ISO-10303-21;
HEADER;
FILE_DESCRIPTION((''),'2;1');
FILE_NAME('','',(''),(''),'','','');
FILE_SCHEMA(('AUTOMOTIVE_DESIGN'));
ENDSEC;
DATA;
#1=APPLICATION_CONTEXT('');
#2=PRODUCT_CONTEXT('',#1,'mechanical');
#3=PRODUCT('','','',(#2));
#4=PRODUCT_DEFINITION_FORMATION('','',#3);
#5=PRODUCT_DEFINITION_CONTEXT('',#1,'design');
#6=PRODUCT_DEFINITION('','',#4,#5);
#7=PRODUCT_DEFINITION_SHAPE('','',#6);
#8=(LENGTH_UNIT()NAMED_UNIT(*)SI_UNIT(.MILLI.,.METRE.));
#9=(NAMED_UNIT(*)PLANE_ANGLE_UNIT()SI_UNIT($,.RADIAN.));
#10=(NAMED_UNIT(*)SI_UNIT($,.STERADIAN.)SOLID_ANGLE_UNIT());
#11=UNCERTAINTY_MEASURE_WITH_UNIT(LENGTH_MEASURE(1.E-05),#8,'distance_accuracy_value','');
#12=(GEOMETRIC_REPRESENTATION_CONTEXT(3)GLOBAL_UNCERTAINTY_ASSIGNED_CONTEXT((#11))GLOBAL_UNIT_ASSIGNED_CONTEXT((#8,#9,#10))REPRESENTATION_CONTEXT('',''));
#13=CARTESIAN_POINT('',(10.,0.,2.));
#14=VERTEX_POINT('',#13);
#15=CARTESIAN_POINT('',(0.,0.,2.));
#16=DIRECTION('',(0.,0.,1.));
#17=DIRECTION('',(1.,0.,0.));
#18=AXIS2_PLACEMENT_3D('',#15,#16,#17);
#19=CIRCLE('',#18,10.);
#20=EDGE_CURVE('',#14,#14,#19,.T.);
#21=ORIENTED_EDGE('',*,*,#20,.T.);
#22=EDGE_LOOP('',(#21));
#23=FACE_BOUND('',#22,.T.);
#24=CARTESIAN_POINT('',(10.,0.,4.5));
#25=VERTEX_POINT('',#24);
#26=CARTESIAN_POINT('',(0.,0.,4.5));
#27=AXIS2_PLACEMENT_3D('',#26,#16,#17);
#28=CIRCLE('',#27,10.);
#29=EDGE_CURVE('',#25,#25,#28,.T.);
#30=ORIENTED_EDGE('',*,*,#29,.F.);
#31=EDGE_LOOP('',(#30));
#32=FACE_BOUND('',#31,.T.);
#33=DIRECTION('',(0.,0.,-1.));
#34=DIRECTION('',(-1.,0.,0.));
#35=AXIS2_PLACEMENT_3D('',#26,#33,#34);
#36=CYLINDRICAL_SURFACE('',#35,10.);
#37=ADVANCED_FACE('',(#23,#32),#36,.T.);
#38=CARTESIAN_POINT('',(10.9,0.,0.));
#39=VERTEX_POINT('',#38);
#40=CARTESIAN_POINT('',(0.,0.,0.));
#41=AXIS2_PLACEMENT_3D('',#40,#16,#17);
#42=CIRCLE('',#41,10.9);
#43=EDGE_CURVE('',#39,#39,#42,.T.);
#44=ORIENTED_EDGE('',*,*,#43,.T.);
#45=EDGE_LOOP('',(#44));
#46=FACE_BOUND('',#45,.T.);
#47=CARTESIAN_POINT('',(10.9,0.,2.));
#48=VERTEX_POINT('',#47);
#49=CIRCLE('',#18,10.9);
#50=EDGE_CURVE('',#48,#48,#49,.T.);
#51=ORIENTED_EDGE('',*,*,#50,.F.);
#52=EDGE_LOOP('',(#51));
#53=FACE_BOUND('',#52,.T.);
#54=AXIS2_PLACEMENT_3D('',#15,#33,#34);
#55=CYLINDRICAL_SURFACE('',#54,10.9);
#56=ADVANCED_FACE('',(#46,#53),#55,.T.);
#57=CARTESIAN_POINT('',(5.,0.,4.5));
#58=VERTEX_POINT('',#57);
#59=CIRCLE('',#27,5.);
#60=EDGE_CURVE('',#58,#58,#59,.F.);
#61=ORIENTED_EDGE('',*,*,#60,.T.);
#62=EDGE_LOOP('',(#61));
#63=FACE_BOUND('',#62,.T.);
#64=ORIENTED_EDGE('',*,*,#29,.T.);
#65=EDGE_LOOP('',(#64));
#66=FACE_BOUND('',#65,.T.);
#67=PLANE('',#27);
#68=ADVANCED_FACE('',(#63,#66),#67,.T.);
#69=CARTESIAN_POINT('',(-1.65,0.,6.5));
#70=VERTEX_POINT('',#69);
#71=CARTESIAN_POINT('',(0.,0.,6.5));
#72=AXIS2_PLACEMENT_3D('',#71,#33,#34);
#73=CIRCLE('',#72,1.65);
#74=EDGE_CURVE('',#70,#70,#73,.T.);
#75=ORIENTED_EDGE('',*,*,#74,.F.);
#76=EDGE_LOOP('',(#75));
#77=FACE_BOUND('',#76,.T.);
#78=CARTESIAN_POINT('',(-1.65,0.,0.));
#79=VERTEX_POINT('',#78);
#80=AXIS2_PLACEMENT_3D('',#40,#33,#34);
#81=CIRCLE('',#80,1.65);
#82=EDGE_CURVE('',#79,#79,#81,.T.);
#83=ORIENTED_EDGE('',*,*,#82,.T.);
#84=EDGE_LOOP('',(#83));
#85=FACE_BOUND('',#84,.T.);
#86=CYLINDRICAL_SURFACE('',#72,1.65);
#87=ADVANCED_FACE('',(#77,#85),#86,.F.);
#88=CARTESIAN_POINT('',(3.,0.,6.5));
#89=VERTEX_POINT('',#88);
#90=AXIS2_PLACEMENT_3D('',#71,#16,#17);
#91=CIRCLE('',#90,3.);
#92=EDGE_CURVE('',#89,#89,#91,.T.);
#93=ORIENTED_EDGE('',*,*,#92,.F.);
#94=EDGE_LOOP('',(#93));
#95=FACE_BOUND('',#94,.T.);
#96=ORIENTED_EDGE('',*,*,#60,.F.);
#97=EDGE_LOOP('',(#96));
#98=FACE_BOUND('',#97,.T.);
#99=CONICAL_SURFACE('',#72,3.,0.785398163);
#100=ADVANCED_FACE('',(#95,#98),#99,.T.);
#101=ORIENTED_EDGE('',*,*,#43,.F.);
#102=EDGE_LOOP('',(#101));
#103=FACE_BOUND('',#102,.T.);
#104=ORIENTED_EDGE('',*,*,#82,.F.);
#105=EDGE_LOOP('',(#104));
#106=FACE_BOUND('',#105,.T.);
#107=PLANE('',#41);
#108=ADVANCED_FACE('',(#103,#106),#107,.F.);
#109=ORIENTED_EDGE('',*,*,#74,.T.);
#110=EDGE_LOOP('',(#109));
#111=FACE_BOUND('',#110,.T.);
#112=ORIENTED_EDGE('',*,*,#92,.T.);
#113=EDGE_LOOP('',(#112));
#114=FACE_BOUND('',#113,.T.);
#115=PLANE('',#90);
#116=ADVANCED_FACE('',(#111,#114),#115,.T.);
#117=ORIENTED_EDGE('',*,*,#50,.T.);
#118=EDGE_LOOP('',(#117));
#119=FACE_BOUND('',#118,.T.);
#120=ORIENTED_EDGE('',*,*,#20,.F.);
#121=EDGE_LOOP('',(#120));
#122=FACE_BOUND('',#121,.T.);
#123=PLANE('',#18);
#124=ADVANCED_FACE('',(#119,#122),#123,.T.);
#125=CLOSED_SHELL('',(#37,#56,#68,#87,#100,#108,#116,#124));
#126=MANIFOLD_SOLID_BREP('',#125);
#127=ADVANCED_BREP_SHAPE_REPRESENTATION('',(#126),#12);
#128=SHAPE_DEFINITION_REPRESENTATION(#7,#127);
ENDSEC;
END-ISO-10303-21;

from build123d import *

# Parameters (mm, degrees)
SKETCH1_R           = 10.9
BOSS_EXTRUDE1_DEPTH = 2
SKETCH2_R           = 10
BOSS_EXTRUDE2_DEPTH = 2.5
SKETCH4_R           = 3
BOSS_EXTRUDE3_DEPTH = 2
SKETCH3_R           = 1.65
CUT_EXTRUDE1_DEPTH  = 17.729315587
CHAMFER1_SIZE       = 2


with BuildPart() as part:
    # Sketch1 → Boss-Extrude1 (new body)
    with BuildSketch(Plane.XY):
        Circle(SKETCH1_R)
    extrude(amount=BOSS_EXTRUDE1_DEPTH)

    # Sketch2 → Boss-Extrude2 (add)
    with BuildSketch(Plane.XY.offset(2)):
        Circle(SKETCH2_R)
    extrude(amount=BOSS_EXTRUDE2_DEPTH)

    # Sketch4 → Boss-Extrude3 (add)
    with BuildSketch(Plane.XY.offset(4.5)):
        Circle(SKETCH4_R)
    extrude(amount=BOSS_EXTRUDE3_DEPTH)

    # Sketch3 → Cut-Extrude1 (cut, through all)
    with BuildSketch(Plane(origin=(0, 0, 0), x_dir=(-1, 0, 0), z_dir=(0, 0, -1))):
        Circle(SKETCH3_R)
    extrude(amount=-CUT_EXTRUDE1_DEPTH, mode=Mode.SUBTRACT)

    # Chamfer1
    chamfer1_edges = [part.edges().sort_by_distance(p)[0] for p in [
        (-3, 0, 4.5),
    ]]
    chamfer(chamfer1_edges, length=CHAMFER1_SIZE - 0.0001)  # a hair under: the kernel refuses the full size


solid = part.part
